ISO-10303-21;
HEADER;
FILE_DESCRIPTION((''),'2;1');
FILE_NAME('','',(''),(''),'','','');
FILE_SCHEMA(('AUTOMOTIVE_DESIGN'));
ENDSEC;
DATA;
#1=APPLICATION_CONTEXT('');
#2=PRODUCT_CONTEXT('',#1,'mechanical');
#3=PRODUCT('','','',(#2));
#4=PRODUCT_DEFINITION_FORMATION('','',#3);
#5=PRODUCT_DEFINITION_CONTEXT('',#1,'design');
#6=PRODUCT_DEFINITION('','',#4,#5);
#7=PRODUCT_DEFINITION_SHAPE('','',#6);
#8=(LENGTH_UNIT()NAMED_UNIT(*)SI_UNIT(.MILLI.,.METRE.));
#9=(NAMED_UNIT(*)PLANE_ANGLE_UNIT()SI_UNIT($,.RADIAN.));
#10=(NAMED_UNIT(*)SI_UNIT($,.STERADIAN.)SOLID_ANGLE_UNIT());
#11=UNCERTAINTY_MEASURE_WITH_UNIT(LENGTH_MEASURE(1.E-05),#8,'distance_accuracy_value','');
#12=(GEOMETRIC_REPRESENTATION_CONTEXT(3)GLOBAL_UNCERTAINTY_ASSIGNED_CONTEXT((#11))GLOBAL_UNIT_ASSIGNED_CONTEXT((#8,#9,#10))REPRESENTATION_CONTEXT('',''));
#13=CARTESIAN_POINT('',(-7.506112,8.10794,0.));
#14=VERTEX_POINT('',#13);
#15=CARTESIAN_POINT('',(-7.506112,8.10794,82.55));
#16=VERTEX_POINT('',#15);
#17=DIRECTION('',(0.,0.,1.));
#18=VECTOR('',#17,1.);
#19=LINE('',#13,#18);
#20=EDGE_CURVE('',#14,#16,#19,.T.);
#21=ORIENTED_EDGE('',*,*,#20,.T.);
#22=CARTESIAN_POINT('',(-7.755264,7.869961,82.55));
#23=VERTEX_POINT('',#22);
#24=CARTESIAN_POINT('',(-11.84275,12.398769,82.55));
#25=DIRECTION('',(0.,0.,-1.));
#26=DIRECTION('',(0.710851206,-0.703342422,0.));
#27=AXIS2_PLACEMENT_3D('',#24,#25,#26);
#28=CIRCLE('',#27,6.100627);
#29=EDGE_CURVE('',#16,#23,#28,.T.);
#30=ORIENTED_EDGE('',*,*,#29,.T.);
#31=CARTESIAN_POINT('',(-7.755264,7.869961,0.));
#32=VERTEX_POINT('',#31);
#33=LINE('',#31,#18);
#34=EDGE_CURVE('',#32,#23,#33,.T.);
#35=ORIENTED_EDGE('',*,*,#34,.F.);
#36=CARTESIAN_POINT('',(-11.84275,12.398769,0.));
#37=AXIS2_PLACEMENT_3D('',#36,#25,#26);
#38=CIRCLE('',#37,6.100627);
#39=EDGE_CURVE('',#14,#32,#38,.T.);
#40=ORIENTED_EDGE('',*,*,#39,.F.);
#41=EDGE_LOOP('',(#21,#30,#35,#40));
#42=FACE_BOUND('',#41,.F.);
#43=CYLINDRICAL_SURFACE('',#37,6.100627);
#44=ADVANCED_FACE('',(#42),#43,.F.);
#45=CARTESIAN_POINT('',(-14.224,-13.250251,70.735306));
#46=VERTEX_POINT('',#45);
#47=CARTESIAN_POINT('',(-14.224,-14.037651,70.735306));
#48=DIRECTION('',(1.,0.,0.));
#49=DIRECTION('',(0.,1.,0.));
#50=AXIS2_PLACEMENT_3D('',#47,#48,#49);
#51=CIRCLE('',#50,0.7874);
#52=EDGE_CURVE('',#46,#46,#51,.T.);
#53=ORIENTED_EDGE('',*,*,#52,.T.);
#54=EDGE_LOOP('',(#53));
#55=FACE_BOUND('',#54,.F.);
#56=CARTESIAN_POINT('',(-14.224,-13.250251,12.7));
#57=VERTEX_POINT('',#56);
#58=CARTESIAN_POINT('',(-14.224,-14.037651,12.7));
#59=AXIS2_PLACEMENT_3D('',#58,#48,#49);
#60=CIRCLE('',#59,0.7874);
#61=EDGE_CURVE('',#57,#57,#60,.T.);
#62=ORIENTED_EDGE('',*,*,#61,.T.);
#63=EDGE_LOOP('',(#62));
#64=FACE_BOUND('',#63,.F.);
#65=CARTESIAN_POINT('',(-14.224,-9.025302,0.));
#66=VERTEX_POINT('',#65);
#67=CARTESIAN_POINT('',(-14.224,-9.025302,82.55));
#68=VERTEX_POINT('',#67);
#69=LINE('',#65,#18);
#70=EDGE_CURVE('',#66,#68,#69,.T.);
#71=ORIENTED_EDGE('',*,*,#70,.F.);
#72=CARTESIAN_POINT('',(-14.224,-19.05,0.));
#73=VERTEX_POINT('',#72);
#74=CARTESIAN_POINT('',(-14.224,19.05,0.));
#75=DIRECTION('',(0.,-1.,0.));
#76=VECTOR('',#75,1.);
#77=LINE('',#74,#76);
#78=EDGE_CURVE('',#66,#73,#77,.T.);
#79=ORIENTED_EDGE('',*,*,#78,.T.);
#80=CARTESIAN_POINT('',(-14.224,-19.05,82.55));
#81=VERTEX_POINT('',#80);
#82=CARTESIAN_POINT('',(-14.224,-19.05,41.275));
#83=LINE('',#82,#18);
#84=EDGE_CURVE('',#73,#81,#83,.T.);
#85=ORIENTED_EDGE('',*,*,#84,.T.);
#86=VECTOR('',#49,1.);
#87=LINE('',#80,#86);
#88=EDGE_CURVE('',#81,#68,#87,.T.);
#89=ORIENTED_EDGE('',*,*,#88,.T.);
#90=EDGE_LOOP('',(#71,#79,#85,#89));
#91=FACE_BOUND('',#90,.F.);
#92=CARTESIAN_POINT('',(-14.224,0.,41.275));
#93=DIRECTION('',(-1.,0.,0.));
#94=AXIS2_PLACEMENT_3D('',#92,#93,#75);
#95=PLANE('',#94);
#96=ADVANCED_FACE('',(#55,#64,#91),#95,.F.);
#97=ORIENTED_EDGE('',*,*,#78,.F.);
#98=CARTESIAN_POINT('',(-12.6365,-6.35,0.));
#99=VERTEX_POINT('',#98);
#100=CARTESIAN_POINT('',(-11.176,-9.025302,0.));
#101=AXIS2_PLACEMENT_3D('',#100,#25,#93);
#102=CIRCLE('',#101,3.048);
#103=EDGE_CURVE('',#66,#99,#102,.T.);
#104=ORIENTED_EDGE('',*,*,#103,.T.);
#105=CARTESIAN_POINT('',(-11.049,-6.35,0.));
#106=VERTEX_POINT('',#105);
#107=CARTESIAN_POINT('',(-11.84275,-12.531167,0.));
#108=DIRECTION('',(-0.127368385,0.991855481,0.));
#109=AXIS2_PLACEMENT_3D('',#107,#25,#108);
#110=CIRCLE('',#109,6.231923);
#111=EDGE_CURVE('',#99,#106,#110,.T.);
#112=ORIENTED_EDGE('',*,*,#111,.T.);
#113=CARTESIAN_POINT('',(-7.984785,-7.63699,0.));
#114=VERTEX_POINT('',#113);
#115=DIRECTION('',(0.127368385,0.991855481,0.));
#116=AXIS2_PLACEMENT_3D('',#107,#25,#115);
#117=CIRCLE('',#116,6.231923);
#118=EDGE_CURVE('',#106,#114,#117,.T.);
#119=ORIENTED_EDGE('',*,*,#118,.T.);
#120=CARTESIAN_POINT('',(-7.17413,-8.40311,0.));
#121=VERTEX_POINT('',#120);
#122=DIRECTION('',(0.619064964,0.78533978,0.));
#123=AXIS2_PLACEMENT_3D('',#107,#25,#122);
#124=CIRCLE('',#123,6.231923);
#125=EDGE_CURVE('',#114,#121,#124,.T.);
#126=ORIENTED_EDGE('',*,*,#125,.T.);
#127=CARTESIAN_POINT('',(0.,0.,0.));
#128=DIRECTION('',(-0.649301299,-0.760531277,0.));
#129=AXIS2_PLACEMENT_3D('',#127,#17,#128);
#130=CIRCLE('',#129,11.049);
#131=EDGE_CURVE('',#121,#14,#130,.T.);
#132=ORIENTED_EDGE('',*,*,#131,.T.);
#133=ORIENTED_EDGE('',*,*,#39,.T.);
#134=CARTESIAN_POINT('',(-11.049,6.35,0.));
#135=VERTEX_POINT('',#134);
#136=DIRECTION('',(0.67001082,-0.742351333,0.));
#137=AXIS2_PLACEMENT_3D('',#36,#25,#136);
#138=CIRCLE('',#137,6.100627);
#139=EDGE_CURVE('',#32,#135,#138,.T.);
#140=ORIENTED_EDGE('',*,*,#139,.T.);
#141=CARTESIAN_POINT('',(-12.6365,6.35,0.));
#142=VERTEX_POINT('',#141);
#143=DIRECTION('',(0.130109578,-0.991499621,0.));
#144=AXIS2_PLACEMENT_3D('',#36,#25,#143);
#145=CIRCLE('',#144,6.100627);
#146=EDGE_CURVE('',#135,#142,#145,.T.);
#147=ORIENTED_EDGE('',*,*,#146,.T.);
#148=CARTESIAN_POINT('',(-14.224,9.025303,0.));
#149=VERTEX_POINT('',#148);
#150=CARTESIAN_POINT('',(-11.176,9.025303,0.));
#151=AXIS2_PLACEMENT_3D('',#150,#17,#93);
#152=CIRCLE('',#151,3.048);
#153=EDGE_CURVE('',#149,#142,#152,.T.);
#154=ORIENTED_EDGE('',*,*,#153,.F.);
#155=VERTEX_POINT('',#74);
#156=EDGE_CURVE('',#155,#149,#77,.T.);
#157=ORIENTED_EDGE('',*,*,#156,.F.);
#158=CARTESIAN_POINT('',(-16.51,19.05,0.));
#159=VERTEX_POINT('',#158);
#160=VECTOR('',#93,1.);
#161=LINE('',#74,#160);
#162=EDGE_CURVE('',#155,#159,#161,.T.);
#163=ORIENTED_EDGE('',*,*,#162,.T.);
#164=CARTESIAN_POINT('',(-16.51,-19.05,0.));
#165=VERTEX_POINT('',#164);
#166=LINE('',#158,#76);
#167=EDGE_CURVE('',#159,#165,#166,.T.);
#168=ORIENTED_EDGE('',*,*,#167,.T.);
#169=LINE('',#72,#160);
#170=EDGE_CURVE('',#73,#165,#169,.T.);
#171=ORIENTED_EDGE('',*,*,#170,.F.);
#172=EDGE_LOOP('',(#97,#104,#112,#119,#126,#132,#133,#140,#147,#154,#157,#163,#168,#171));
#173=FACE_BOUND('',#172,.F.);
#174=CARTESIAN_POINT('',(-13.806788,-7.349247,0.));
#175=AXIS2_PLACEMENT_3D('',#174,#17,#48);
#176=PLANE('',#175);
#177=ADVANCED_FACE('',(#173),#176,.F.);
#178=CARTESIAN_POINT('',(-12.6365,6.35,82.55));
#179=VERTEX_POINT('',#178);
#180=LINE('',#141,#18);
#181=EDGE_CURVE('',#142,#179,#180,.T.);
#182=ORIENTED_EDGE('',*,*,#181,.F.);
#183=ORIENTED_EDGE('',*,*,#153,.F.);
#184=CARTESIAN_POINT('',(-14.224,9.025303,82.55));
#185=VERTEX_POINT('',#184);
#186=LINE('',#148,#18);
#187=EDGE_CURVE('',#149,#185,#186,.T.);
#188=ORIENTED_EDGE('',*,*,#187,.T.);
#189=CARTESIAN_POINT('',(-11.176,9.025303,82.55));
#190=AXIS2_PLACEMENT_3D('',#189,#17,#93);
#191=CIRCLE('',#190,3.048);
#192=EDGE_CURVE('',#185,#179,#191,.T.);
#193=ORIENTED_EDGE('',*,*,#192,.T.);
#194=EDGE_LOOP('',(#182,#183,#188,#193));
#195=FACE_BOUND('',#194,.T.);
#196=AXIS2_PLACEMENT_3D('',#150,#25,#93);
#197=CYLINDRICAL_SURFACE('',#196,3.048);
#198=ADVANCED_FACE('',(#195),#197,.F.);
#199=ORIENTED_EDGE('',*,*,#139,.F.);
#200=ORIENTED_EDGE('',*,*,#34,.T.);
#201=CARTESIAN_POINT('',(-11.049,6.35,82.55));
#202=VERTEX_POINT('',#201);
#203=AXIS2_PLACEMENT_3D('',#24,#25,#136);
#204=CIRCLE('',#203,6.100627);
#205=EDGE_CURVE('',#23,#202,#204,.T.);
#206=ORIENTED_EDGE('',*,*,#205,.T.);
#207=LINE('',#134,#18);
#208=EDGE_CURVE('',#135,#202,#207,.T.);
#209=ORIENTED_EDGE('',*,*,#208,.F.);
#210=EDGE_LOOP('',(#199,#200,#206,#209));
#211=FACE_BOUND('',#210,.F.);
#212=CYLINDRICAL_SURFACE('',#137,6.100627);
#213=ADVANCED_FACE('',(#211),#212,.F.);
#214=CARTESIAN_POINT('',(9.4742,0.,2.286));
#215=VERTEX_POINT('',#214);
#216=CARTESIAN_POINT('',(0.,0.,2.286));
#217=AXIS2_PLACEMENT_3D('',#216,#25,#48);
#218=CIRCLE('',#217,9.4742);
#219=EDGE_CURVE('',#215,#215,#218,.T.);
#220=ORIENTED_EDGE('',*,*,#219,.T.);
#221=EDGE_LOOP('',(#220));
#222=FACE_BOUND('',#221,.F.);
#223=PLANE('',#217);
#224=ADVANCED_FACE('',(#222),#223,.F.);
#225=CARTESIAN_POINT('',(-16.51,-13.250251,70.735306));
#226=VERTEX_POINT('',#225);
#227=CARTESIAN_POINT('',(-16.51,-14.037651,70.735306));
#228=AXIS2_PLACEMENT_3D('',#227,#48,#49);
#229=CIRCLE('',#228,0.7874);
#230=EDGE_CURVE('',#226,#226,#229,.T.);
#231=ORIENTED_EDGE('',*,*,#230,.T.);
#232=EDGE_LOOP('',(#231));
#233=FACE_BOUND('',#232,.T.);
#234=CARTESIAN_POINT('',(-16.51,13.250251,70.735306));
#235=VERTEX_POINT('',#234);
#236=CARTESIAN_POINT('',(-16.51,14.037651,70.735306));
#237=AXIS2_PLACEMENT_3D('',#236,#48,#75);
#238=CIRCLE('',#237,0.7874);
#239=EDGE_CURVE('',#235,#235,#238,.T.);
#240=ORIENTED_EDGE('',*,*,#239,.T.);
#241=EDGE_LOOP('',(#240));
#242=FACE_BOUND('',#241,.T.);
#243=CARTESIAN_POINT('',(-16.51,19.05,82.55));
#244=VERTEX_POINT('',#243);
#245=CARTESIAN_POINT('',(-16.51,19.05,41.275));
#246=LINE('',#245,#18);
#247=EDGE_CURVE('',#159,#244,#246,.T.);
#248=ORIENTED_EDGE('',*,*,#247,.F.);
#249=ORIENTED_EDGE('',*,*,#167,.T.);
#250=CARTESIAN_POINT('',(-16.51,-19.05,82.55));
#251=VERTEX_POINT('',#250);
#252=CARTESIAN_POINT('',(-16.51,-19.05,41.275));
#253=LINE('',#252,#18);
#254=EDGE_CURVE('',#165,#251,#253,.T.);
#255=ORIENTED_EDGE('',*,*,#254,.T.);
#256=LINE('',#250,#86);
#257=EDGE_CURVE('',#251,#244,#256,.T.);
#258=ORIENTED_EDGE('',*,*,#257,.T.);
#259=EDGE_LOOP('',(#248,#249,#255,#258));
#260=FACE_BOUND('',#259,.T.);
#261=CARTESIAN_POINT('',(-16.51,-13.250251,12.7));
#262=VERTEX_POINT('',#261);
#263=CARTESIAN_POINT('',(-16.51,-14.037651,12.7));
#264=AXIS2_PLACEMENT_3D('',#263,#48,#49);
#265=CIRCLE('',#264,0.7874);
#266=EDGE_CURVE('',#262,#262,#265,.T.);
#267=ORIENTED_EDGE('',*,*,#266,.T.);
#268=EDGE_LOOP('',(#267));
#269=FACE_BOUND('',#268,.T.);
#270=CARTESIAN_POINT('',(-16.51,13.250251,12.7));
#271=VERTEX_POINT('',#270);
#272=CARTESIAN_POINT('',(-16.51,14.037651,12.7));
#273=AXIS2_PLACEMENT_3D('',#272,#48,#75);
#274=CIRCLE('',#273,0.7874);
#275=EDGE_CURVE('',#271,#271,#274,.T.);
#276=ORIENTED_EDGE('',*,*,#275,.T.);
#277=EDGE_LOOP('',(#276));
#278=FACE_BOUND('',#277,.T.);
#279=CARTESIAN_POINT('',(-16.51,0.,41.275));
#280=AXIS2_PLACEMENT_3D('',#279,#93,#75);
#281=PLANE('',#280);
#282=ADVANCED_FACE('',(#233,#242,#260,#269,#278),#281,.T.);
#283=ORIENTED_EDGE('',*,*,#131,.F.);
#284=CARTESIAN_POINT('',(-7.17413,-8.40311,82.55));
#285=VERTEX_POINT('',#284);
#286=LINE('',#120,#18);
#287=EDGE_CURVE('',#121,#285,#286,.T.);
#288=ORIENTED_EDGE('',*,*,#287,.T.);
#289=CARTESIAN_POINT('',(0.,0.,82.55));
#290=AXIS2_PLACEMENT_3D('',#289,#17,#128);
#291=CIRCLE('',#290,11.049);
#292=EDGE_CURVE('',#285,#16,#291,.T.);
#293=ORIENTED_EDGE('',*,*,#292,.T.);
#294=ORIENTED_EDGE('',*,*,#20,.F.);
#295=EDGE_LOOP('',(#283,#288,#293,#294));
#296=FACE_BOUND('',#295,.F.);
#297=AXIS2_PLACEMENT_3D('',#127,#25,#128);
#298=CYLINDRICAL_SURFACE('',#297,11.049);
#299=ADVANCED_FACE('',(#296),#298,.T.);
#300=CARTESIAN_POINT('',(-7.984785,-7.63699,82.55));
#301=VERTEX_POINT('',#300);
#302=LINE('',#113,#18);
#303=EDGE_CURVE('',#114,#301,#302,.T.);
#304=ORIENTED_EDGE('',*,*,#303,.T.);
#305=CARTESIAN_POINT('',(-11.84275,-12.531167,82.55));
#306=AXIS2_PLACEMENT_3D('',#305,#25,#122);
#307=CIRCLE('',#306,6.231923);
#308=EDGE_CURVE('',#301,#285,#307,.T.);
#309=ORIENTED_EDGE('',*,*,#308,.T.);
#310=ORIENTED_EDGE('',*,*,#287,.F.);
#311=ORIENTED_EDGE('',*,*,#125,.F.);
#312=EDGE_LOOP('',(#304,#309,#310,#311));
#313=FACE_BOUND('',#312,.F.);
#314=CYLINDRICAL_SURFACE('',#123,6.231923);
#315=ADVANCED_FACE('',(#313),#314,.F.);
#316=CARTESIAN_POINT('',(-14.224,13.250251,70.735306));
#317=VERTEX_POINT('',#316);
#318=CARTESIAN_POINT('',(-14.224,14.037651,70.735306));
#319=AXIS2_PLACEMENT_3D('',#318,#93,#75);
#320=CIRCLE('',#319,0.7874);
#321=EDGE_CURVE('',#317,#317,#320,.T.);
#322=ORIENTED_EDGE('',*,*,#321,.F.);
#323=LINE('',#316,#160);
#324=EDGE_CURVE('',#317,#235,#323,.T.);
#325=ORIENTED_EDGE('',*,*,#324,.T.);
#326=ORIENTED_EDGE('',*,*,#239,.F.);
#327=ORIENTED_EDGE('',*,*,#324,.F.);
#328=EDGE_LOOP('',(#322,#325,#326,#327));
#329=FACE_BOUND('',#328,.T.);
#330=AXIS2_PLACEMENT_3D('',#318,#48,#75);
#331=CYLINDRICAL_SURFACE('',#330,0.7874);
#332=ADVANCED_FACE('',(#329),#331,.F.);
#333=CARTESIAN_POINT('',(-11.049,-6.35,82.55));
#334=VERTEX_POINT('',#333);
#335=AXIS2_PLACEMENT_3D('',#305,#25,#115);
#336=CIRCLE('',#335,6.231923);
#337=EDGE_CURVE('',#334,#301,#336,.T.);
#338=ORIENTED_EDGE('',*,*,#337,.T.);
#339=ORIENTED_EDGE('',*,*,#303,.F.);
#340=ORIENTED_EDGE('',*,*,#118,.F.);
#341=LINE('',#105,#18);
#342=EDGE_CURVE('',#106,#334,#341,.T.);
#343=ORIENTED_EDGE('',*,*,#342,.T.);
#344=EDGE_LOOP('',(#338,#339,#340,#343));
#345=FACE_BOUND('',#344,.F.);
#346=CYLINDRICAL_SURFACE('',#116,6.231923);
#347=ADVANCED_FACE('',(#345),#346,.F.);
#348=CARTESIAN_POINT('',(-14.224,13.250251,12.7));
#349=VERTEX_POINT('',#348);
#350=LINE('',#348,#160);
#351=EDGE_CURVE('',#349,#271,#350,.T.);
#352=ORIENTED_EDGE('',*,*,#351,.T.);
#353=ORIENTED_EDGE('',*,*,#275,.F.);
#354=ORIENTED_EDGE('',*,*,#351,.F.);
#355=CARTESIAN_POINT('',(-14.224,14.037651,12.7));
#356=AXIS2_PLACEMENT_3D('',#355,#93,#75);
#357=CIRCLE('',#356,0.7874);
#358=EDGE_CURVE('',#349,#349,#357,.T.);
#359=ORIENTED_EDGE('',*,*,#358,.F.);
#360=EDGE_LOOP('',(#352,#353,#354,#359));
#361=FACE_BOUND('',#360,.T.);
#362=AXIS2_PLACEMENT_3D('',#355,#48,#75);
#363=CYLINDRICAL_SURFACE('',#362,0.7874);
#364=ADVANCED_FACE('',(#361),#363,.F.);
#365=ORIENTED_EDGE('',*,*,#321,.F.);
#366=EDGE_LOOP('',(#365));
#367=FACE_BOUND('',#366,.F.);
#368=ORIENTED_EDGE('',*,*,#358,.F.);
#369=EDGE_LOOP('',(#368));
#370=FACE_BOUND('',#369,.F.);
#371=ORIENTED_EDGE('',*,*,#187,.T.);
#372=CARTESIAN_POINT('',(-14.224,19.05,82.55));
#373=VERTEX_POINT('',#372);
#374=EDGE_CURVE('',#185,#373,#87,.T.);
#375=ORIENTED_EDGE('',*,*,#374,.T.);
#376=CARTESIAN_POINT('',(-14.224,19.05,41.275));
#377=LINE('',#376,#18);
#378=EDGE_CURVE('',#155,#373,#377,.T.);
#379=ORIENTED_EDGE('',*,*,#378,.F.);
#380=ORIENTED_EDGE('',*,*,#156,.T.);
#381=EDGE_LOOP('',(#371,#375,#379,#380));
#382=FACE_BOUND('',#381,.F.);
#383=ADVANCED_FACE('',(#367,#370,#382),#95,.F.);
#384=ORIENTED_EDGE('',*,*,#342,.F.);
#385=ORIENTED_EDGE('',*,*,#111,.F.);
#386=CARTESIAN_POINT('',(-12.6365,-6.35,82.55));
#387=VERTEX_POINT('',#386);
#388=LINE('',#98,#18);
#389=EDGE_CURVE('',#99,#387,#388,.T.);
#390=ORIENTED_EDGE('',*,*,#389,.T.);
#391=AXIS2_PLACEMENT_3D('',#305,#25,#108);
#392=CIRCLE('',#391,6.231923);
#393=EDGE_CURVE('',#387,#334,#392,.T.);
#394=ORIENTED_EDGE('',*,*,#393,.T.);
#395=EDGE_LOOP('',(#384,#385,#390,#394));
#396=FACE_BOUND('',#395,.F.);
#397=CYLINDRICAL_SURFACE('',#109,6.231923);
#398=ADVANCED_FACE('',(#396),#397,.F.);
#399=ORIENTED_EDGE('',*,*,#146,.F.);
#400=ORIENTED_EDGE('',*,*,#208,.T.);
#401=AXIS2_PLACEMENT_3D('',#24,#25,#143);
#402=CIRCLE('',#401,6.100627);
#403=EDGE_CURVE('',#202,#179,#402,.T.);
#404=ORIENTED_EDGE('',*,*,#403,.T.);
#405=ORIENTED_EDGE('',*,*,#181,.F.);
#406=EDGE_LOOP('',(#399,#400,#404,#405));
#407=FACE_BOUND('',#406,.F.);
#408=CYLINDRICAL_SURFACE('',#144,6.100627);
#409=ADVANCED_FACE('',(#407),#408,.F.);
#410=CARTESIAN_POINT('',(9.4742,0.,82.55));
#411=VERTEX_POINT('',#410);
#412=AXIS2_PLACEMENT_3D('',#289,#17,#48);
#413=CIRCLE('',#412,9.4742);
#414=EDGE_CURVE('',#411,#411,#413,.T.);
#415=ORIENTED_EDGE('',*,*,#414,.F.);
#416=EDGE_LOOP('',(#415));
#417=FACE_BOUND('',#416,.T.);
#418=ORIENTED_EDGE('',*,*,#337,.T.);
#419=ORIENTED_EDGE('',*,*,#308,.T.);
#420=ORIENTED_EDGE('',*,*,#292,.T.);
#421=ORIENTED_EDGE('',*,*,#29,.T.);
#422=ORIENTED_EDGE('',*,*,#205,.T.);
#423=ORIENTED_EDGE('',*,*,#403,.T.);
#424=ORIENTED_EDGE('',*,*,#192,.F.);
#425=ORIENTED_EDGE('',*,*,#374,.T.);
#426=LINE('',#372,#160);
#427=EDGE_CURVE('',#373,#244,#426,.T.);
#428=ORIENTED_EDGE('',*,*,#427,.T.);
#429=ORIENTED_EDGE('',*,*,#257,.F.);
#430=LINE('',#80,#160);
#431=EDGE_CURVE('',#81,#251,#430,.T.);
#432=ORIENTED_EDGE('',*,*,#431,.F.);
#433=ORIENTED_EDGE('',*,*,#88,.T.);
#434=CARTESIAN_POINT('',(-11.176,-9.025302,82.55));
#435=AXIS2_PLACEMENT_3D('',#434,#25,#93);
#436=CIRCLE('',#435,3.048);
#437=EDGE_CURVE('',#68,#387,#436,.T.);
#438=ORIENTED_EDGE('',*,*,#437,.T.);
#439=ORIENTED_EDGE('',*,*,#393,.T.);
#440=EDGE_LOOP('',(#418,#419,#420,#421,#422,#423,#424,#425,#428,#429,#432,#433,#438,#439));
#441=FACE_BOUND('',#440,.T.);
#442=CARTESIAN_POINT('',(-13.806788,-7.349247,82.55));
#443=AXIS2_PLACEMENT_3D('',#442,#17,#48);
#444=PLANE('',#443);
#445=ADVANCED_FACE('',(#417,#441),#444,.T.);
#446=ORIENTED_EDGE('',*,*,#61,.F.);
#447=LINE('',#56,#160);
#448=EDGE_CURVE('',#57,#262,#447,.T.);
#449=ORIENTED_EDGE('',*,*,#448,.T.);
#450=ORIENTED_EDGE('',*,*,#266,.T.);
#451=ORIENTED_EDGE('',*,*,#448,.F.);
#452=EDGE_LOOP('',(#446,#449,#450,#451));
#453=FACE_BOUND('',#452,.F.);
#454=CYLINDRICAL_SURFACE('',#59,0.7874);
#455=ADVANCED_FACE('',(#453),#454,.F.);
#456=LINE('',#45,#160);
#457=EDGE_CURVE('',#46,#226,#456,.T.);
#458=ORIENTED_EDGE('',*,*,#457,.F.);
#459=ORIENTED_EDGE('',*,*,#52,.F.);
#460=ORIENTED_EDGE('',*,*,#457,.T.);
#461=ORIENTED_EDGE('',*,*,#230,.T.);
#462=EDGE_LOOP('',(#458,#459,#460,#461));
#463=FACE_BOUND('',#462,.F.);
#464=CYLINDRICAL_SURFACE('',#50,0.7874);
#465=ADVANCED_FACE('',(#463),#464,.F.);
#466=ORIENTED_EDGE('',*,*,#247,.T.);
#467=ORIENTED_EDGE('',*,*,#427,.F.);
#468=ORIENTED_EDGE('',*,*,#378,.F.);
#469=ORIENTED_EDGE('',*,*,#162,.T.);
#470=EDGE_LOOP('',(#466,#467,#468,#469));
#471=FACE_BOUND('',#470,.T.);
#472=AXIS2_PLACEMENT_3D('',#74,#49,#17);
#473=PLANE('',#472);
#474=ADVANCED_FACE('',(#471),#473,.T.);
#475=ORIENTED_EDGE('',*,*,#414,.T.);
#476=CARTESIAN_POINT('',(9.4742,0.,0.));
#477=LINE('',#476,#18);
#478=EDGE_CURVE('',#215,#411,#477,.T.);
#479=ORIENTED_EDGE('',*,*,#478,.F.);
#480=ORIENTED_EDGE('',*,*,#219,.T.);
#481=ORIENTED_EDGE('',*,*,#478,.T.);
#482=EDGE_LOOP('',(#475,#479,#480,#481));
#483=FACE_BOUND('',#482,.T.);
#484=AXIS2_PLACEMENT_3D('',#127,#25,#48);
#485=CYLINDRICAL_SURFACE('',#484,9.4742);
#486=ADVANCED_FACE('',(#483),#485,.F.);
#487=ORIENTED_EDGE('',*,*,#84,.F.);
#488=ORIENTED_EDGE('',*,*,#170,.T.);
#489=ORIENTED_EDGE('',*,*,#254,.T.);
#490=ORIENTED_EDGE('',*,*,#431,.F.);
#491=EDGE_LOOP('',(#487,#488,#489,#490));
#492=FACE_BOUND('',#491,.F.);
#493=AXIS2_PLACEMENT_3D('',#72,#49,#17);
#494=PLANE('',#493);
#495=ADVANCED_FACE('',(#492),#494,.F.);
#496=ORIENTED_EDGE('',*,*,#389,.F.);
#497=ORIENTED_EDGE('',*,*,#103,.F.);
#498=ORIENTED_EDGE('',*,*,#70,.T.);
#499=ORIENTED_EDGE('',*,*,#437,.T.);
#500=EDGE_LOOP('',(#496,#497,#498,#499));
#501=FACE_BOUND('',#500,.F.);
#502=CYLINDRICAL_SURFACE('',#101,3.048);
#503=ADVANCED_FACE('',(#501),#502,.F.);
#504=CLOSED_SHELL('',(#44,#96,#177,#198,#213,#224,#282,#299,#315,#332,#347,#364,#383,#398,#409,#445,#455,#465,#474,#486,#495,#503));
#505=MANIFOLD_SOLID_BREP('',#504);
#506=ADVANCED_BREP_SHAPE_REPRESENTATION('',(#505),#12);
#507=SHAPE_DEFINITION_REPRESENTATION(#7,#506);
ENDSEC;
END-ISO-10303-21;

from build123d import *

# Parameters (mm, degrees)
F0_R        = 9.4742
F1_DEPTH    = 82.55
F2_R        = 9.4742
F3_DEPTH    = 2.286
F4_W        = 12.7000000767
F4_H        = 82.55
F4_W_2      = 12.7
F5_DEPTH    = 2.286
F6_T1_DEPTH = 82.55
F7_R        = 0.7874
F8_DEPTH    = 13.208


# Not quite as in the source:
# - a fillet or chamfer that OpenCascade refuses, or shapes differently, is made with other operations: its cross-section is extruded or revolved along the edge and cut away or added
# - a pattern or mirror of a feature is missing from the dataset's text; its kind, count and spacing are read off the source's solid


with BuildPart() as f1:
    # F0 (on Top) → F1 (new body)
    with BuildSketch(Plane.XY):
        with BuildLine():
            ThreePointArc((-11.049, -6.3499999233), (-9.4295157118, -6.785458523), (-7.9847846533, -7.6369899201))
            ThreePointArc((-7.9847846533, -7.6369899201), (-7.5622828297, -8.001877119), (-7.1741300574, -8.4031100742))
            ThreePointArc((-7.1741300574, -8.4031100742), (11.0467672464, 0.2221134929), (-7.5061119691, 8.1079395723))
            ThreePointArc((-7.5061119691, 8.1079395723), (-7.6290075774, 7.9871909027), (-7.755263928, 7.8699607628))
            ThreePointArc((-7.755263928, 7.8699607628), (-9.2865444962, 6.859503776), (-11.049, 6.35))
            ThreePointArc((-11.049, 6.35), (-11.84275, 6.2981423564), (-12.6365, 6.35))
            Line((-12.6365, 6.35), (-14.224, 6.35))
            Line((-14.224, 6.35), (-14.224, -6.3499999233))
            Line((-14.224, -6.3499999233), (-12.6365, -6.3499999233))
            ThreePointArc((-12.6365, -6.3499999233), (-11.84275, -6.2992439038), (-11.049, -6.3499999233))
        make_face()
        Circle(F0_R, mode=Mode.SUBTRACT)
    extrude(amount=F1_DEPTH)

    # F2 (on face) → F3 (join)
    with BuildSketch(Plane(origin=(0, 0, 0), x_dir=(1, 0, 0), z_dir=(0, 0, -1))):
        Circle(F2_R)
    extrude(amount=-F3_DEPTH)

    # F4 (on face) → F5 (join)
    with BuildSketch(Plane(origin=(-14.224, 0, 0), x_dir=(0, -1, 0), z_dir=(-1, 0, 0))):
        Polygon((6.3499999233, 82.55), (0, 82.55), (-6.35, 82.55), (-6.35, 0), (6.3499999233, 0), align=None)
        with Locations((12.6999999616, 41.275)):
            Rectangle(F4_W, F4_H)
        with Locations((-12.7, 41.275)):
            Rectangle(F4_W_2, F4_H)
    extrude(amount=F5_DEPTH)

    # F6: fillet of radius 3.048 on 2 edges, made by hand

    # F6_s2 → F6_t1 (join)
    with BuildSketch(Plane.XY):
        with BuildLine():
            ThreePointArc((-14.224, -9.0253024762), (-13.7972504649, -7.4698764896), (-12.6365, -6.3499999233))
            Line((-12.6365, -6.3499999233), (-14.224, -6.3499999233))
            Line((-14.224, -6.3499999233), (-14.224, -9.0253024762))
        make_face()
        with BuildLine():
            ThreePointArc((-14.224, 9.025302553), (-13.7972504649, 7.4698765663), (-12.6365, 6.35))
            Line((-12.6365, 6.35), (-14.224, 6.35))
            Line((-14.224, 6.35), (-14.224, 9.025302553))
        make_face()
    extrude(amount=F6_T1_DEPTH)

    # F7 (on face) → F8 (cut)
    with BuildSketch(Plane.YZ.offset(-14.224)):
        with Locations((-14.0376512381, 70.7353055477)):
            Circle(F7_R)
        with Locations((-14.0376512381, 12.7)):
            Circle(F7_R)
    f8 = extrude(amount=-F8_DEPTH, mode=Mode.SUBTRACT)

    # F8_copies: F8 across plane
    add(f8.mirror(Plane.ZX), mode=Mode.SUBTRACT)


solid = f1.part
